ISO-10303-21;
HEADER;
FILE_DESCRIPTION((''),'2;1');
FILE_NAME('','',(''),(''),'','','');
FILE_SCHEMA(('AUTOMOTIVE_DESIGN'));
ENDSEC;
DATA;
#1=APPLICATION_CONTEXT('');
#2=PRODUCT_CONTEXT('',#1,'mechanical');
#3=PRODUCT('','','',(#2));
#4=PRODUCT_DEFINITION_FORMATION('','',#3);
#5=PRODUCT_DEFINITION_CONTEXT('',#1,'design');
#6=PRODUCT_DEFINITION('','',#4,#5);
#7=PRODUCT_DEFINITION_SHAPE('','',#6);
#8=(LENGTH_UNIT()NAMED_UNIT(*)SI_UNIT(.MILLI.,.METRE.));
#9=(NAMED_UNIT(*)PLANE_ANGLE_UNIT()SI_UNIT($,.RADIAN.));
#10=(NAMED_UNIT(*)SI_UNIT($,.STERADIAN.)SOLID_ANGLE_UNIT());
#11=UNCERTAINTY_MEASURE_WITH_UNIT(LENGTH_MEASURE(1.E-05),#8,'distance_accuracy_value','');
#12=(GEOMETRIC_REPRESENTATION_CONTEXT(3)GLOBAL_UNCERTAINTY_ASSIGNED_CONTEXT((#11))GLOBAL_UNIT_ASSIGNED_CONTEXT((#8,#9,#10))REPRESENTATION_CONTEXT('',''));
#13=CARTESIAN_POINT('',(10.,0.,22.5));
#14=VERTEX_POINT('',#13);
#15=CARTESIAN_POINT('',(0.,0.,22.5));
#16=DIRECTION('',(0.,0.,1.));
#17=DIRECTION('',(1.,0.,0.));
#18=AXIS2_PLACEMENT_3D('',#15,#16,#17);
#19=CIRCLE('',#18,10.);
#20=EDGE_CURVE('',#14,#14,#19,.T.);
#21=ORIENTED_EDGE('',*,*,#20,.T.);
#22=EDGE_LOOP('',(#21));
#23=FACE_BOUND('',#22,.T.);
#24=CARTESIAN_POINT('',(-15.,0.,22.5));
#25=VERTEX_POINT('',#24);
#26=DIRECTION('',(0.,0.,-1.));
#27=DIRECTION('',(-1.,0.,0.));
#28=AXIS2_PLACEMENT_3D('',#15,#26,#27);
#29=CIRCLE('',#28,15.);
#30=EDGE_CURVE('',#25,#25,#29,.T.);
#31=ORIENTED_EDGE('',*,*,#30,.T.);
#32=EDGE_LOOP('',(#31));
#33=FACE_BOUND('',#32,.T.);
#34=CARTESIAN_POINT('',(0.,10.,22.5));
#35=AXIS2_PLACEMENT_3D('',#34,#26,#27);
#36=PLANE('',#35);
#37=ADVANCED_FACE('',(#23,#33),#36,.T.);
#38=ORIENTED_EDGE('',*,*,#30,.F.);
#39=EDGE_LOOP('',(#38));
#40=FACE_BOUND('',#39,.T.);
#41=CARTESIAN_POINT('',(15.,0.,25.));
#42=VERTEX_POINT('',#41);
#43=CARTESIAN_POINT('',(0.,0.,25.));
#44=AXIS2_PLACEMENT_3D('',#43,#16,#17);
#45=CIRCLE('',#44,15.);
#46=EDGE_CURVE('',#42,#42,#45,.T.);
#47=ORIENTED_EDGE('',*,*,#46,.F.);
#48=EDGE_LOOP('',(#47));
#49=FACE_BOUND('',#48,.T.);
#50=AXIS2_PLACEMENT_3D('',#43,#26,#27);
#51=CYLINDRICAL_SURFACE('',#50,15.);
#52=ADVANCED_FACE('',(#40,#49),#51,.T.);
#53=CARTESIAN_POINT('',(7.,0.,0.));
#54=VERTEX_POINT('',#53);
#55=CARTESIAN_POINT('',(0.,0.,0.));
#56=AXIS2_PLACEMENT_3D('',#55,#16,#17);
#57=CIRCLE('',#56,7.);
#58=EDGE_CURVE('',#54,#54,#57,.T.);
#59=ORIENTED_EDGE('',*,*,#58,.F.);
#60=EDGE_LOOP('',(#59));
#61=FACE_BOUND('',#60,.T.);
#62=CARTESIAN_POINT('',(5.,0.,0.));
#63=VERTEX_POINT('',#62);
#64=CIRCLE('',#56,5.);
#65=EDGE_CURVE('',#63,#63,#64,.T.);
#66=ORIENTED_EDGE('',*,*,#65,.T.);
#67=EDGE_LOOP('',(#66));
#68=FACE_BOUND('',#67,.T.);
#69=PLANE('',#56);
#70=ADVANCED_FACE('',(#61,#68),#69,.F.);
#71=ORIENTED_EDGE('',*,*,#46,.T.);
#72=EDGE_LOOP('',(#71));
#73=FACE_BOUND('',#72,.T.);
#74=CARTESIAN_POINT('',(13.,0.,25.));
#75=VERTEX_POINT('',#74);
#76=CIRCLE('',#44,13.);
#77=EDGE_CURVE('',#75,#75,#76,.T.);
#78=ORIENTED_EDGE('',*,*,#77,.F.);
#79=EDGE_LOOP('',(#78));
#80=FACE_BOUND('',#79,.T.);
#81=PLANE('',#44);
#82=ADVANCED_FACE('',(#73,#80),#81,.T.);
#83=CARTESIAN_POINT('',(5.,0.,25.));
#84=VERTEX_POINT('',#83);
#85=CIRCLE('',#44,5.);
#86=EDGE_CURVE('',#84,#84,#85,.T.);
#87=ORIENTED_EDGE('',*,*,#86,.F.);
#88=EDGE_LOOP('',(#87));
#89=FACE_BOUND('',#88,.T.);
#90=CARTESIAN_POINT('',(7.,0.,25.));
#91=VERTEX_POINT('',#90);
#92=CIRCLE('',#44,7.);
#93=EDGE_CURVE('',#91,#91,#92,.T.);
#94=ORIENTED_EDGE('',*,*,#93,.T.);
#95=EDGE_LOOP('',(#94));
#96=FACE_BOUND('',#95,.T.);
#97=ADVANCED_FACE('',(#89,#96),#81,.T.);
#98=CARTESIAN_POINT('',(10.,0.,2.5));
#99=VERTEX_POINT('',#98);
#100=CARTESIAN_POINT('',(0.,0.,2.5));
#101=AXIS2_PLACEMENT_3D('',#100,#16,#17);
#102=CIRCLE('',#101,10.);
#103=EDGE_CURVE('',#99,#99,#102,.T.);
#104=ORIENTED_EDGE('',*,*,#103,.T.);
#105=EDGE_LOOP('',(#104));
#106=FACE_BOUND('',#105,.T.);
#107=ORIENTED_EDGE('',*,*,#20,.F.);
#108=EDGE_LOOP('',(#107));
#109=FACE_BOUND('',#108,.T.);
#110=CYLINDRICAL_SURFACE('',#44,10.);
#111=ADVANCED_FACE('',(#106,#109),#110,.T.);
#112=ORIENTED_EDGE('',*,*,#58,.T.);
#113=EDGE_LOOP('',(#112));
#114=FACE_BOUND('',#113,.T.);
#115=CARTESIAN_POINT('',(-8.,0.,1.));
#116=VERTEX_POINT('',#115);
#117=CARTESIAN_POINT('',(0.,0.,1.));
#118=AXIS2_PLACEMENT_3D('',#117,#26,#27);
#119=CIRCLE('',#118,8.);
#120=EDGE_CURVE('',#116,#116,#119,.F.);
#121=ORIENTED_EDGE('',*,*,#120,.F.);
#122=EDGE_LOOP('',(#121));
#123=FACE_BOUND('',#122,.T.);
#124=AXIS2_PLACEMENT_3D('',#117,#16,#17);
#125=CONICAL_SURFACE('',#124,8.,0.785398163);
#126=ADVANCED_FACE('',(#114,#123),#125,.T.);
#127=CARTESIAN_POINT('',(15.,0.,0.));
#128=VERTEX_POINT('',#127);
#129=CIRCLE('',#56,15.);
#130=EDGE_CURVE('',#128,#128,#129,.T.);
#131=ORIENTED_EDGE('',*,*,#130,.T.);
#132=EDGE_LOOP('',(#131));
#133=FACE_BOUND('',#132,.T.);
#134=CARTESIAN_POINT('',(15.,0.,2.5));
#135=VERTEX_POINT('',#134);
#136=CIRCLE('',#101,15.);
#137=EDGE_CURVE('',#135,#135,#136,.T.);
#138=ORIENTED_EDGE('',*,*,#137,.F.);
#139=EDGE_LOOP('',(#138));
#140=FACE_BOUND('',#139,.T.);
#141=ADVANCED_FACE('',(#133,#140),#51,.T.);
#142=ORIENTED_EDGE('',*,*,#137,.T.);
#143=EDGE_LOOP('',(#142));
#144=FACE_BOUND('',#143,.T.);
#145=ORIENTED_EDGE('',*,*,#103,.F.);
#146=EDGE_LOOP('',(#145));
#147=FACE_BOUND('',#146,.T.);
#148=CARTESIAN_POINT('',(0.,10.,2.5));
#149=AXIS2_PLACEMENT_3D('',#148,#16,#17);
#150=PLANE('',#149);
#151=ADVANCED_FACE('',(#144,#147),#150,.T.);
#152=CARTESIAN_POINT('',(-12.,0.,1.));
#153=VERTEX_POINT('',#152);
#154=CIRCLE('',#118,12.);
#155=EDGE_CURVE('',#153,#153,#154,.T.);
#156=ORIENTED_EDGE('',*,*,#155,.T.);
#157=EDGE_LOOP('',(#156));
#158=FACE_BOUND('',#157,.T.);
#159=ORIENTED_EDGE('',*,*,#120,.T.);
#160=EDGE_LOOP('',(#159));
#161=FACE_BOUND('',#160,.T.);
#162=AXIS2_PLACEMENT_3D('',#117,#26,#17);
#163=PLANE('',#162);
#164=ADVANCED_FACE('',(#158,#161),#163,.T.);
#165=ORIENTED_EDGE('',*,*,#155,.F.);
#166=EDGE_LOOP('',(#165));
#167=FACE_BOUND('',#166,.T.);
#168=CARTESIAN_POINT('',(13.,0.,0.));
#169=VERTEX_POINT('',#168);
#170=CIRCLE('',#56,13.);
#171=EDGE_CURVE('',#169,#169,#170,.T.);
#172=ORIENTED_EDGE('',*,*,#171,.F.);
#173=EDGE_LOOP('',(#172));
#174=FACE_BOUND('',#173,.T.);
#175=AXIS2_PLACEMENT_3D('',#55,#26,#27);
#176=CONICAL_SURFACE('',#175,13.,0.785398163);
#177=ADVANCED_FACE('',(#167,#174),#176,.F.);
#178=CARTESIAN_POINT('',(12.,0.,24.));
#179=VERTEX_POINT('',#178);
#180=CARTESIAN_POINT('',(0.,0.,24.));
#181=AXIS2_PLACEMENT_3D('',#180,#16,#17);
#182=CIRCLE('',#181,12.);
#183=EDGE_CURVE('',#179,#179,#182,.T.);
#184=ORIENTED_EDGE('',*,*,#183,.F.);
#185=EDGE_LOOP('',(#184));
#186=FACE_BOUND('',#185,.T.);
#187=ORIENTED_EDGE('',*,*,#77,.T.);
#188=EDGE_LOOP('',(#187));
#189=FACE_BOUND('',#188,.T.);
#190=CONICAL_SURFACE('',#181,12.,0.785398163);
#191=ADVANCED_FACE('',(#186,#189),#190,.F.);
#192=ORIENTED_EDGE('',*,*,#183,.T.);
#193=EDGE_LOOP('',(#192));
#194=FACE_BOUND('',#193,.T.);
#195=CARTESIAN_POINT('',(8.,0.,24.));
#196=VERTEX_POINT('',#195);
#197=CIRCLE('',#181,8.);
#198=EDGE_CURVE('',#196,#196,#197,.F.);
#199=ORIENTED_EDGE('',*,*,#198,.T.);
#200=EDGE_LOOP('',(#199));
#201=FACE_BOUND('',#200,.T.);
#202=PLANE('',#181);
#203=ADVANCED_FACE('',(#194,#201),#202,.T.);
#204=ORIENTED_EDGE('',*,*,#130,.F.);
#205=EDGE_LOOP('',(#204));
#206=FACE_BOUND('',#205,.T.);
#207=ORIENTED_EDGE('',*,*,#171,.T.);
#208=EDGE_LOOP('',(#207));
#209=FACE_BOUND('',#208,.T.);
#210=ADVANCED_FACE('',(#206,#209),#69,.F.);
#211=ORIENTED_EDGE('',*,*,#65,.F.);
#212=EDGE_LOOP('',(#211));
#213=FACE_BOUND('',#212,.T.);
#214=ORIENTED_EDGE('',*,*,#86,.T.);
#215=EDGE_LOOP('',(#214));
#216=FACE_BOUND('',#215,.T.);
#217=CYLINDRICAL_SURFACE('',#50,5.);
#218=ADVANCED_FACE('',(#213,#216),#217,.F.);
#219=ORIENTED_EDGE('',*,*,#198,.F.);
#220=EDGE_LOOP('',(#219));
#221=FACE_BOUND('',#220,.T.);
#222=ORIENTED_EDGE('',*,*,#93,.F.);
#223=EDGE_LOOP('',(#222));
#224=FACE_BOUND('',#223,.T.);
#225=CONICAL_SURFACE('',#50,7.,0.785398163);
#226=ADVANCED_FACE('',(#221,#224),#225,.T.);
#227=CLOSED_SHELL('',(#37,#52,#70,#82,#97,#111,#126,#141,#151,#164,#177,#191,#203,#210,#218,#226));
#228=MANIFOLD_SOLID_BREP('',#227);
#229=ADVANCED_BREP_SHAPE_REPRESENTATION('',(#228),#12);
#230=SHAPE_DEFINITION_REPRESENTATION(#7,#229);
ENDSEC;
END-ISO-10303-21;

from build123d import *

# Parameters (mm, degrees)
CROQUIS1_R                 = 15
CROQUIS1_R_2               = 5
SALIENTE_EXTRUIR1_DEPTH    = 25
CROQUIS3_W                 = 20
CROQUIS3_H                 = 10
CROQUIS4_R                 = 13
CROQUIS4_R_2               = 7
CORTAR_EXTRUIR1_DEPTH      = 1
CHAFL_N1_SIZE              = 1
CHAFL_N1_OF_SIMETR_A2_SIZE = 1


with BuildPart() as part:
    # Croquis1 → Saliente-Extruir1 (new body)
    with BuildSketch(Plane.XY):
        Circle(CROQUIS1_R)
        Circle(CROQUIS1_R_2, mode=Mode.SUBTRACT)
    extrude(amount=SALIENTE_EXTRUIR1_DEPTH)

    # Croquis3 → Cortar-Revolución1 (revolve, cut)
    with BuildSketch(Plane(origin=(0, 0, 0), x_dir=(0, 0, -1), z_dir=(1, 0, 0)), mode=Mode.PRIVATE) as cortar_revoluci_n1_sk:
        with Locations((-12.5, 15)):
            Rectangle(CROQUIS3_W, CROQUIS3_H)
    revolve(cortar_revoluci_n1_sk.sketch.rotate(Axis((0, 0, 25), (0, 0, -1)), 90), axis=Axis((0, 0, 25), (0, 0, -1)), mode=Mode.SUBTRACT)

    # Croquis4 → Cortar-Extruir1 (cut)
    with BuildSketch(Plane.XY.offset(25)):
        Circle(CROQUIS4_R)
        Circle(CROQUIS4_R_2, mode=Mode.SUBTRACT)
    cortar_extruir1 = extrude(amount=-CORTAR_EXTRUIR1_DEPTH, mode=Mode.SUBTRACT)

    # Chaflán1
    chafl_n1_edges = [part.edges().sort_by_distance(p)[0] for p in [
        (-13, 0, 24),
        (-7, 0, 24),
    ]]
    chamfer(chafl_n1_edges, length=CHAFL_N1_SIZE - 0.0001)  # a hair under: the kernel refuses the full size

    # Simetría2: Cortar-Extruir1 across plane
    add(cortar_extruir1.mirror(Plane.XY.offset(12.5)), mode=Mode.SUBTRACT)

    # Chaflán1 of Simetría2
    chafl_n1_of_simetr_a2_edges = [part.edges().sort_by_distance(p)[0] for p in [
        (-13, 0, 1),
        (-7, 0, 1),
    ]]
    chamfer(chafl_n1_of_simetr_a2_edges, length=CHAFL_N1_OF_SIMETR_A2_SIZE - 0.0001)  # a hair under: the kernel refuses the full size


solid = part.part
